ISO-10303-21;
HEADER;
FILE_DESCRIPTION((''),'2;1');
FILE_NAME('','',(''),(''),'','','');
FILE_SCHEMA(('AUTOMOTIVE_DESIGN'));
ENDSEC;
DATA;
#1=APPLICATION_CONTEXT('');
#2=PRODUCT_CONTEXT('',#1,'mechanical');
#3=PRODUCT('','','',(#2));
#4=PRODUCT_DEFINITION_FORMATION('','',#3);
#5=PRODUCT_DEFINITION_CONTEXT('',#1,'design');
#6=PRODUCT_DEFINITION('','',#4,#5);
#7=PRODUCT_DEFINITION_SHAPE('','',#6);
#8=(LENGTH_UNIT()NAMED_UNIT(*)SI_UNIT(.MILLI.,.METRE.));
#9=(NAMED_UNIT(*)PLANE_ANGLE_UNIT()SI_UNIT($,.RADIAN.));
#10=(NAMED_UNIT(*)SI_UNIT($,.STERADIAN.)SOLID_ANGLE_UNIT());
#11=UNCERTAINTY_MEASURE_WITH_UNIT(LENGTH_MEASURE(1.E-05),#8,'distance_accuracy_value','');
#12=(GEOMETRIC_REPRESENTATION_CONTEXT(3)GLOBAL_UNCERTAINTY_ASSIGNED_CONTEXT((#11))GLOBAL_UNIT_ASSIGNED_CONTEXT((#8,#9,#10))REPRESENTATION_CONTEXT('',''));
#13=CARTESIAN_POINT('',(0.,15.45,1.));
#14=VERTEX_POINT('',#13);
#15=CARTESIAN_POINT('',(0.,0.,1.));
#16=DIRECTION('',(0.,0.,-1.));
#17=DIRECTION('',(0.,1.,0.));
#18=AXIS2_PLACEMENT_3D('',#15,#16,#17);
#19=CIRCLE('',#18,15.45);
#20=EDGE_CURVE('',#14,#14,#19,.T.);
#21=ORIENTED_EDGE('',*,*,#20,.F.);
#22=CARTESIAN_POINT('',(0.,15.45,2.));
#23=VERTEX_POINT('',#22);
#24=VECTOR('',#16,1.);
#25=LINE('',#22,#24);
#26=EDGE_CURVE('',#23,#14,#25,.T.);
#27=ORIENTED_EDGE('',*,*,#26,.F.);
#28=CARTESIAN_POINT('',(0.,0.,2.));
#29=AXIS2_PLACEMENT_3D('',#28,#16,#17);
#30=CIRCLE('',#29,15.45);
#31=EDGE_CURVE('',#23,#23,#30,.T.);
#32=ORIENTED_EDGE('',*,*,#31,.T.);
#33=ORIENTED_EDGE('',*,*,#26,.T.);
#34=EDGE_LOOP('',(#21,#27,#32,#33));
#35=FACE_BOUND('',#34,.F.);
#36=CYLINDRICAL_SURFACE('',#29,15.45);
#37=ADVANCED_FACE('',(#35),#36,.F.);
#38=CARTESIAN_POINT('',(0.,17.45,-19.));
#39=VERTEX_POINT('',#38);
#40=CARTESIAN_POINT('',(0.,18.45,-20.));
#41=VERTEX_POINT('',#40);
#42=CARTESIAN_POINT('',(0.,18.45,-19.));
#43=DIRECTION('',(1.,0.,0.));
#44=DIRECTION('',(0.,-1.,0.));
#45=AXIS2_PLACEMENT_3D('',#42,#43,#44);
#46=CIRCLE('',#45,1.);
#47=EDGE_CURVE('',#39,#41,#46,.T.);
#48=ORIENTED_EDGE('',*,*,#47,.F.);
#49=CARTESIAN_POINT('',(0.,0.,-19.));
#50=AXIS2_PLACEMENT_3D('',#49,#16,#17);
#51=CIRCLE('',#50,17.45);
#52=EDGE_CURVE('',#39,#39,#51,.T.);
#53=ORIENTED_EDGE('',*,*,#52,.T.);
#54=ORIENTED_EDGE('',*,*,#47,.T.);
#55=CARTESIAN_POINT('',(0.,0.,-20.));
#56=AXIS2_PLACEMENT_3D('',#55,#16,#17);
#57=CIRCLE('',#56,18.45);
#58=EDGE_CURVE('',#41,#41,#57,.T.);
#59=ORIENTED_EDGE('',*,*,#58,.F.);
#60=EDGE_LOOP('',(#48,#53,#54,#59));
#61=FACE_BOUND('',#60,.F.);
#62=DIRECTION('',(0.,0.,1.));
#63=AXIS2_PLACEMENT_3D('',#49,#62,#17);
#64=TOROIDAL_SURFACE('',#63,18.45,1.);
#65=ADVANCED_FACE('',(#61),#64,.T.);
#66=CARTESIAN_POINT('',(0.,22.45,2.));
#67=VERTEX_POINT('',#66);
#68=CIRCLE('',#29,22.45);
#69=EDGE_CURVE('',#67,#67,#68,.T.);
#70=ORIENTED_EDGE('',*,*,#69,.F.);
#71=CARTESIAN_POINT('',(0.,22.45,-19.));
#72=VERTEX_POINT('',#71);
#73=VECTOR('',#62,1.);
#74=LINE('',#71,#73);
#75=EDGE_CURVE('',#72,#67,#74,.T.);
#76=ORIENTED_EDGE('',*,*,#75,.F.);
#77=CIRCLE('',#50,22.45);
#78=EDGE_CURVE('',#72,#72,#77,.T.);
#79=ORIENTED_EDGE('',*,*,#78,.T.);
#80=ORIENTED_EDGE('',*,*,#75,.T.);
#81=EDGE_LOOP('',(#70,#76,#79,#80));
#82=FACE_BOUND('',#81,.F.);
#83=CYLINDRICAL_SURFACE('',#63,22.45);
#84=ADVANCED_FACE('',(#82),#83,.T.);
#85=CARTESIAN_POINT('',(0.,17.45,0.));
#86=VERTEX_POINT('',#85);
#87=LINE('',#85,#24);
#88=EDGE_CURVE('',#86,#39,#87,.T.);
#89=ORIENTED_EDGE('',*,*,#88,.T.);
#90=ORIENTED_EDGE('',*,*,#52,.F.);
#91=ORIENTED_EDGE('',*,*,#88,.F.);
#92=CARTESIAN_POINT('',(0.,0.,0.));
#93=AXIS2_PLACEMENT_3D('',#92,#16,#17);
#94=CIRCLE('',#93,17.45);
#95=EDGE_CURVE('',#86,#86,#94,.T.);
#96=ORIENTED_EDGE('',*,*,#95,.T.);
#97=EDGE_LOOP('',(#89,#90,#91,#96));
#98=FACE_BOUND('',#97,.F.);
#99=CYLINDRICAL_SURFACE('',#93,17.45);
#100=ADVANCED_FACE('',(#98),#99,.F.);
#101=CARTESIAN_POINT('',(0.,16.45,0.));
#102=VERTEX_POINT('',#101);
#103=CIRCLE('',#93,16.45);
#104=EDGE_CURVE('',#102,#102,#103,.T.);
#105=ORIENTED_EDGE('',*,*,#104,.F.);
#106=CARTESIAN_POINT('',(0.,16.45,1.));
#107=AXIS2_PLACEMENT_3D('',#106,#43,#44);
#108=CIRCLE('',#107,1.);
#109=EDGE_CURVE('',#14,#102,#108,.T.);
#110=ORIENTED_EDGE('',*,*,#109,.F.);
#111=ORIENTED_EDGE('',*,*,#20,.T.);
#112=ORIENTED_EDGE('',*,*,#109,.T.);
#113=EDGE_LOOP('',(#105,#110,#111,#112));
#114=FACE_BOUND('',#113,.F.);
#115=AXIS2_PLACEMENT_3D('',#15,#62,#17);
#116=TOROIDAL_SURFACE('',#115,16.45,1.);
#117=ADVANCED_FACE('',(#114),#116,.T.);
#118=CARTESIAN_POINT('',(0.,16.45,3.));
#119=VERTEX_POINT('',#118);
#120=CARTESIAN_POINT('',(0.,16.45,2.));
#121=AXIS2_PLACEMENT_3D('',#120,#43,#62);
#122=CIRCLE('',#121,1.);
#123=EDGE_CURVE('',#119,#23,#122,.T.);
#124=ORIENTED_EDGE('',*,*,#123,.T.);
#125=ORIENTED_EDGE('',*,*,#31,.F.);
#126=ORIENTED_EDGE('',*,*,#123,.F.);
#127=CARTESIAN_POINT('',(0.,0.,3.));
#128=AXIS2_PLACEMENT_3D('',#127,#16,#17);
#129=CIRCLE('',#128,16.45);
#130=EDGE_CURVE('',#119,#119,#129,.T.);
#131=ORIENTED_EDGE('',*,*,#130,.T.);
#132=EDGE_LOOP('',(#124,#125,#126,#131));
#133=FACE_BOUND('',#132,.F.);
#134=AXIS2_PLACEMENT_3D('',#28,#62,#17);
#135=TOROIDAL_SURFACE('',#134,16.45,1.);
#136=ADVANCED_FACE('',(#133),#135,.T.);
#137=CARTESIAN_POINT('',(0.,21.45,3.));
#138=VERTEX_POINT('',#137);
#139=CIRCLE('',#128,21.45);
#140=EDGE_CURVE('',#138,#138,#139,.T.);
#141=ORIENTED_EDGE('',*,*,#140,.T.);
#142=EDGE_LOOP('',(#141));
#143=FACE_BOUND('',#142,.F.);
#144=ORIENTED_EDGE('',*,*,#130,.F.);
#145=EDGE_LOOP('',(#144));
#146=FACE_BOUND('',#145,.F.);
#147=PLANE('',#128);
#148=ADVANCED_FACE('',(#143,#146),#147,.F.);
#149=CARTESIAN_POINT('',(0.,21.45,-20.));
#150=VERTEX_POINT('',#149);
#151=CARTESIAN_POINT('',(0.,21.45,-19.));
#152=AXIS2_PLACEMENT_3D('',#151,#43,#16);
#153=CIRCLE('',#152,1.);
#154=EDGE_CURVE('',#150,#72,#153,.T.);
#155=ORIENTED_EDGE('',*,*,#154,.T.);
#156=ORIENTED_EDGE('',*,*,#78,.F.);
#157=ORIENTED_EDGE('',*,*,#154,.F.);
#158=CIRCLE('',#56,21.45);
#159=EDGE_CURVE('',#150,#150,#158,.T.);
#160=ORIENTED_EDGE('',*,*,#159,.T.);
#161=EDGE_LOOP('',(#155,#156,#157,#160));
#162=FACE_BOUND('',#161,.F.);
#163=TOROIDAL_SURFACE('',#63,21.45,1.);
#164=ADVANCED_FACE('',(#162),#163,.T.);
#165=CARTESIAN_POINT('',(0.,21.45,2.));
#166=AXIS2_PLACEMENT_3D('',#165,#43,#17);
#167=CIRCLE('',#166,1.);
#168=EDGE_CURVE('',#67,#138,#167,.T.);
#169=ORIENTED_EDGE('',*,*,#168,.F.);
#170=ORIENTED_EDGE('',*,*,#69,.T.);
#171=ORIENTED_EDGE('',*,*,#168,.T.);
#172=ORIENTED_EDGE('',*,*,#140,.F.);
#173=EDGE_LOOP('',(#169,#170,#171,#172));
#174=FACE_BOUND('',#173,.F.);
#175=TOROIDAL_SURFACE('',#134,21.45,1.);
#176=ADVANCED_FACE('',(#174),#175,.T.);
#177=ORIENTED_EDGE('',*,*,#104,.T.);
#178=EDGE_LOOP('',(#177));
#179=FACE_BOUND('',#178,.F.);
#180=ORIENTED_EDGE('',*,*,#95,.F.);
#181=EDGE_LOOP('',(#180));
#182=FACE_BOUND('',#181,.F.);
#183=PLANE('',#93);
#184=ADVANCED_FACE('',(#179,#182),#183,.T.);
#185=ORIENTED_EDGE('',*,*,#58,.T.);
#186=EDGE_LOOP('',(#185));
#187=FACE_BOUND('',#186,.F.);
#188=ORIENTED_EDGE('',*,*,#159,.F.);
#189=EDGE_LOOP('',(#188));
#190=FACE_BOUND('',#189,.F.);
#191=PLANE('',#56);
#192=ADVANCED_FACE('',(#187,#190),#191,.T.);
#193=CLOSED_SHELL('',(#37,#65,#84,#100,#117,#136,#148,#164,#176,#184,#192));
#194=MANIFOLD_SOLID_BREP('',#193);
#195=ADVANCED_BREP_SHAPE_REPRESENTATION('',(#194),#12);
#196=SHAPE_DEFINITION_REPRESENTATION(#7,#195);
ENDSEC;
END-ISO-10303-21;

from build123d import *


with BuildPart() as f1:
    # F0 (on Right) → F1 (revolve)
    with BuildSketch(Plane.YZ):
        with BuildLine():
            Line((21.45, 3), (16.45, 3))
            ThreePointArc((16.45, 3), (15.7428932188, 2.7071067812), (15.45, 2))
            Line((15.45, 2), (15.45, 1))
            ThreePointArc((15.45, 1), (15.7428932188, 0.2928932188), (16.45, 0))
            Line((16.45, 0), (17.45, 0))
            Line((17.45, 0), (17.45, -19))
            ThreePointArc((17.45, -19), (17.7428932188, -19.7071067812), (18.45, -20))
            Line((18.45, -20), (21.45, -20))
            ThreePointArc((21.45, -20), (22.1571067812, -19.7071067812), (22.45, -19))
            Line((22.45, -19), (22.45, 2))
            ThreePointArc((22.45, 2), (22.1571067812, 2.7071067812), (21.45, 3))
        make_face()
    revolve(axis=Axis((0, 0, -3.255167976), (0, 0, -1)))


solid = f1.part
